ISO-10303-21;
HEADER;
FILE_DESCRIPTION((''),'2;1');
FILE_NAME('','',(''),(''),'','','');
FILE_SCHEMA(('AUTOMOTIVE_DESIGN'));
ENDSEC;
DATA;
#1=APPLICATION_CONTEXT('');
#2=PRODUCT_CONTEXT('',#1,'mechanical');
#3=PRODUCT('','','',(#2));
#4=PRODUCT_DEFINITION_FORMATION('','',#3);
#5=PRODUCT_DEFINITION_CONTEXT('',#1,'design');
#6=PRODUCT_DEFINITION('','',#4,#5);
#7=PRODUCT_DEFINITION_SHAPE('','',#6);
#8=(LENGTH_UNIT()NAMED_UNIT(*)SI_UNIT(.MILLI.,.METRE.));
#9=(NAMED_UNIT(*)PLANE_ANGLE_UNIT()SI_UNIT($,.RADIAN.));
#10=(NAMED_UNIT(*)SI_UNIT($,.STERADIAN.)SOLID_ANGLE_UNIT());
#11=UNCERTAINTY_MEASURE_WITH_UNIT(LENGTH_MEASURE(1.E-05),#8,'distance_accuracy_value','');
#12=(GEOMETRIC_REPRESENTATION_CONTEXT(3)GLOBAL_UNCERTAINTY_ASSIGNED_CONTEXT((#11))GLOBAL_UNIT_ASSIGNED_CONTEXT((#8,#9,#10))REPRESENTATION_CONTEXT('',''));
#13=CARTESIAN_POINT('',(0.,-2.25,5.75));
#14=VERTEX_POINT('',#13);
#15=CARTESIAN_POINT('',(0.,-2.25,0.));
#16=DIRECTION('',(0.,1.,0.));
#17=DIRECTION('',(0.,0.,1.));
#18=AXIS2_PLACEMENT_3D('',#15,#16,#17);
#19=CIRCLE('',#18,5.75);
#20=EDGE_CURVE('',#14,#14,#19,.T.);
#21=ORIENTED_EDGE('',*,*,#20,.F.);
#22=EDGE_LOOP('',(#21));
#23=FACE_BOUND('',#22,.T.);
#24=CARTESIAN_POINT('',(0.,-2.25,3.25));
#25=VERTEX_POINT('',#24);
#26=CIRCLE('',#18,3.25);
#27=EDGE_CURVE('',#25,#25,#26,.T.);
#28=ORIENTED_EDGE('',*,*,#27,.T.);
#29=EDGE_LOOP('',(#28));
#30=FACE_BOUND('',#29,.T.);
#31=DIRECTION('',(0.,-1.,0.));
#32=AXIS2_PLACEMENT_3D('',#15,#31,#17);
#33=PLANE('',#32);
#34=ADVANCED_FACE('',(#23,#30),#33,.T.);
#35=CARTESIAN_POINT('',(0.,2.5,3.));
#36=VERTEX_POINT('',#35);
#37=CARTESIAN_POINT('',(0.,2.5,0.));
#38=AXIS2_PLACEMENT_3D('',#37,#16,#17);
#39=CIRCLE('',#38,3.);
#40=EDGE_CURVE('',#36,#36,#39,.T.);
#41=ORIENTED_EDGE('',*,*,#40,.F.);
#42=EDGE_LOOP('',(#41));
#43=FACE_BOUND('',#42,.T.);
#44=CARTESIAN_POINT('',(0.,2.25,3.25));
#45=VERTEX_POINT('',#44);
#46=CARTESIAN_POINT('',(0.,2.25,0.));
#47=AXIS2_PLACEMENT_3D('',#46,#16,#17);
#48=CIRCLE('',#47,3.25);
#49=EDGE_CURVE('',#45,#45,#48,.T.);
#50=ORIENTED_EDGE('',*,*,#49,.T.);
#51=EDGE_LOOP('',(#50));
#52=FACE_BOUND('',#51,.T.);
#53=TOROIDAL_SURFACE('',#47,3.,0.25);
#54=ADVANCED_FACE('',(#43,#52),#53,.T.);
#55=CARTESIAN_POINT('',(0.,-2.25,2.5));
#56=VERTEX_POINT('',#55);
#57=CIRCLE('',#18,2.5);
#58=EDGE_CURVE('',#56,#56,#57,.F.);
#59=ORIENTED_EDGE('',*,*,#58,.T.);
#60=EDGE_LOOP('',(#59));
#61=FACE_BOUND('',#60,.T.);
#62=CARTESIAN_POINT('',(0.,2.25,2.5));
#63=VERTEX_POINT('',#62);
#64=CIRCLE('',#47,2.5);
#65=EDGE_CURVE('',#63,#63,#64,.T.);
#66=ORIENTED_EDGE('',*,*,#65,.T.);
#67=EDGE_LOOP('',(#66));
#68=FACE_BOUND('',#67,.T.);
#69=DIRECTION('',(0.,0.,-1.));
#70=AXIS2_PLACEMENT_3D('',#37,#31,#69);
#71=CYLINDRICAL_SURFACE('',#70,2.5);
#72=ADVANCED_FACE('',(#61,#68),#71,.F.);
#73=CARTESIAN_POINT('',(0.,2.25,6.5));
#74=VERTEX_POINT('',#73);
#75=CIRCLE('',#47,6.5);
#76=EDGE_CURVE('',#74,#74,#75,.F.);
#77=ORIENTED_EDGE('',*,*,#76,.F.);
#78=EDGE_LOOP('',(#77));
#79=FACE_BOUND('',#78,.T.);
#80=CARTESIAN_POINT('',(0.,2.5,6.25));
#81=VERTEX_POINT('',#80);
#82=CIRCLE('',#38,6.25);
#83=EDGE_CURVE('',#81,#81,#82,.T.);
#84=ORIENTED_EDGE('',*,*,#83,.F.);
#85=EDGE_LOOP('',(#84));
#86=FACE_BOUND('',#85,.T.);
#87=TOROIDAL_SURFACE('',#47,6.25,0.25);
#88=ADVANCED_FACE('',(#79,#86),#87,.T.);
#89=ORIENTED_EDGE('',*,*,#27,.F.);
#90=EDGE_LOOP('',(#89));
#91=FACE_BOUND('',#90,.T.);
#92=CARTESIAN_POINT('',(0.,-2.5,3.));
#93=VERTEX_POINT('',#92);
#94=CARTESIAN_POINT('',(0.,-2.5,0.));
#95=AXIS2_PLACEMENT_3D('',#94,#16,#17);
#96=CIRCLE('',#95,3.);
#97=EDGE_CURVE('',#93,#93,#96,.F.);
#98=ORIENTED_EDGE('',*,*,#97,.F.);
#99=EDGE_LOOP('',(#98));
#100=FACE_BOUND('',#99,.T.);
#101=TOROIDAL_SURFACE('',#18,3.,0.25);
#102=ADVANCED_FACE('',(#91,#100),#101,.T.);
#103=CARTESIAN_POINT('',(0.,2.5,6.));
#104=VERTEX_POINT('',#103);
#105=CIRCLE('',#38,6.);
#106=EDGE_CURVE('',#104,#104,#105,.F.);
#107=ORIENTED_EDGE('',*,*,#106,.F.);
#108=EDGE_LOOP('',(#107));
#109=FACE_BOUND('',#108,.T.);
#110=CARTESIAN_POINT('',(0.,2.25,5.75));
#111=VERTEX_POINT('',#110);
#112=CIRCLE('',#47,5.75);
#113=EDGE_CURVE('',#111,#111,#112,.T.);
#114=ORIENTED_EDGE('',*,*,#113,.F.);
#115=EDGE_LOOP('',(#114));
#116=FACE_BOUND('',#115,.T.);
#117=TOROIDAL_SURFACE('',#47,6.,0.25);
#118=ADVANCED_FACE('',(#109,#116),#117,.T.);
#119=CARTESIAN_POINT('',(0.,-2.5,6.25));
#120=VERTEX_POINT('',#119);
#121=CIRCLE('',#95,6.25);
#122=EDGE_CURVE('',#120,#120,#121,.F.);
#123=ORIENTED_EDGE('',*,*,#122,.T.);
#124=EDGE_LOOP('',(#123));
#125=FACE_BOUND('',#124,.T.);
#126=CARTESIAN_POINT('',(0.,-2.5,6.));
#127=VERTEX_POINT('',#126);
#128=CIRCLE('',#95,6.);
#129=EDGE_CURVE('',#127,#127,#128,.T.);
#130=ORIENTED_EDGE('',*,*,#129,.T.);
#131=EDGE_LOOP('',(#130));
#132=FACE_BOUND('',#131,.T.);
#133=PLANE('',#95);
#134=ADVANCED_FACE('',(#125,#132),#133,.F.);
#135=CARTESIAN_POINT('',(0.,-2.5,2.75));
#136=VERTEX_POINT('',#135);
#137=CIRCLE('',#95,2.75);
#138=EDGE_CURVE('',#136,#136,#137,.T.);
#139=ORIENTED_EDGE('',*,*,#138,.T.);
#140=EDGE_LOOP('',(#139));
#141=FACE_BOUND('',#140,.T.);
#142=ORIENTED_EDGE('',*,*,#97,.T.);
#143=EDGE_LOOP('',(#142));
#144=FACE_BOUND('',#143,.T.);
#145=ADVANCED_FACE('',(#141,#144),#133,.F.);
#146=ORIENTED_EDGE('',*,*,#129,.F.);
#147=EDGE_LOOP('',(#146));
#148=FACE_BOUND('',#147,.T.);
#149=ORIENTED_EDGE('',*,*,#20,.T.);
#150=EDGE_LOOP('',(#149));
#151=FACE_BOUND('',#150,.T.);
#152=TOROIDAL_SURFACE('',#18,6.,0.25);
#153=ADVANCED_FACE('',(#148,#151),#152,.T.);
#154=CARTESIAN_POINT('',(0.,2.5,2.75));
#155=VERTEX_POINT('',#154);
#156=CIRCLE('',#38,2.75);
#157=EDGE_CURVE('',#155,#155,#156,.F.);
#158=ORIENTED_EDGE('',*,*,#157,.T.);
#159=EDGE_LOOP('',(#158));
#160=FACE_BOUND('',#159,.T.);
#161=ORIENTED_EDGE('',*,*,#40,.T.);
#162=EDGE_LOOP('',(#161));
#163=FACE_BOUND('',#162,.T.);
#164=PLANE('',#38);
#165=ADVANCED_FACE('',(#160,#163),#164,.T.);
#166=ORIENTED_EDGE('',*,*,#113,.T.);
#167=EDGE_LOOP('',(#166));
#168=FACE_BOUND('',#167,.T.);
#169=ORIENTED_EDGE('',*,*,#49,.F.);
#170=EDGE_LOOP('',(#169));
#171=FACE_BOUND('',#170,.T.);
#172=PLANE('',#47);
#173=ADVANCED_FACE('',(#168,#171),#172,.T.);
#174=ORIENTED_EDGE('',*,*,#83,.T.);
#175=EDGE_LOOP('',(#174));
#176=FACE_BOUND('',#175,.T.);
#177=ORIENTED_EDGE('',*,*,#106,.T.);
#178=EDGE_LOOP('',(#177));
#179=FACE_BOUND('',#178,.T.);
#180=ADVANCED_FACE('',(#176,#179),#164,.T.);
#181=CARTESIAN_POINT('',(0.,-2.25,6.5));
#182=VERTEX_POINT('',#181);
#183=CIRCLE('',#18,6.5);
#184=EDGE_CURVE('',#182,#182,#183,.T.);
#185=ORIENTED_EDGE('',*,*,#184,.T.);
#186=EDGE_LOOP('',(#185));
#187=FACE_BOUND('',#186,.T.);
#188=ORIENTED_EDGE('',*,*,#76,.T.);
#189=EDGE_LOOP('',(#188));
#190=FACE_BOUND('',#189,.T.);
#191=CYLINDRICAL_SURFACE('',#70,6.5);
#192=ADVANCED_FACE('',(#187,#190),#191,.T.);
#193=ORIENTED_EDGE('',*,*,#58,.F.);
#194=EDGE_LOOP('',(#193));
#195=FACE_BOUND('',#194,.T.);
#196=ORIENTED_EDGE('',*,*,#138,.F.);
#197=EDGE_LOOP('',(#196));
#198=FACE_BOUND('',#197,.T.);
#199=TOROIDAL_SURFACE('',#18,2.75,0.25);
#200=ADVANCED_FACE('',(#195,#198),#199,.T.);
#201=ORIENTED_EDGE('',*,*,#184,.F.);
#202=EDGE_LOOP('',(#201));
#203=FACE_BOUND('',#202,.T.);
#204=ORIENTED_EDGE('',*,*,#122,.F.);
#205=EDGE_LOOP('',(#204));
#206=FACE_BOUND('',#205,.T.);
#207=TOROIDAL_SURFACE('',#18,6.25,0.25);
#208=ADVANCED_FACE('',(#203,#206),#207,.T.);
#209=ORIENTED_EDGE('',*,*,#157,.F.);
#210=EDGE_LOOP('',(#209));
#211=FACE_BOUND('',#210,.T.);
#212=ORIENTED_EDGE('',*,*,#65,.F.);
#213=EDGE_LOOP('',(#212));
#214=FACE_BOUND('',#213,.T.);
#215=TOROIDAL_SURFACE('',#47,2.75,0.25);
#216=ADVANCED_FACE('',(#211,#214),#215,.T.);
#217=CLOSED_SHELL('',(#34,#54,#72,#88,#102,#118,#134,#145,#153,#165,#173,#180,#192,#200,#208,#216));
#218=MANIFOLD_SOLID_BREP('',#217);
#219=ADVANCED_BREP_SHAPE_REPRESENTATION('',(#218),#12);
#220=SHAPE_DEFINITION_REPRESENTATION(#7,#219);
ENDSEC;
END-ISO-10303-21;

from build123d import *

# Parameters (mm, degrees)
SKETCH_1_R          = 6.5
SKETCH_1_R_2        = 2.5
EXTRUDE_1_DEPTH     = 2.5
SKETCH_2_R          = 5.75
SKETCH_2_R_2        = 3.25
CUT_EXTRUDE_1_DEPTH = 0.25
FILLET_1_R          = 0.25


with BuildPart() as part:
    # ｽｹｯﾁ1 → ﾎﾞｽ - 押し出し1 (new, symmetric)
    with BuildSketch(Plane(origin=(0, 0, 0), x_dir=(1, 0, 0), z_dir=(0, 1, 0))):
        with Locations(Location((0, 0, 0), (0, 0, 270))):
            Circle(SKETCH_1_R)
        with Locations(Location((0, 0, 0), (0, 0, 270))):
            Circle(SKETCH_1_R_2, mode=Mode.SUBTRACT)
    extrude(amount=EXTRUDE_1_DEPTH, both=True)

    # ｽｹｯﾁ2 → ｶｯﾄ - 押し出し1 (cut, symmetric)
    with BuildSketch(Plane(origin=(0, 2.5, 0), x_dir=(1, 0, 0), z_dir=(0, 1, 0))):
        Circle(SKETCH_2_R)
        Circle(SKETCH_2_R_2, mode=Mode.SUBTRACT)
    cut_extrude_1 = extrude(amount=CUT_EXTRUDE_1_DEPTH, both=True, mode=Mode.SUBTRACT)

    # ﾐﾗｰ1: ｶｯﾄ - 押し出し1 across plane
    add(cut_extrude_1.mirror(Plane.ZX), mode=Mode.SUBTRACT)

    # ﾌｨﾚｯﾄ1
    fillet_1_edges = [part.edges().sort_by_distance(p)[0] for p in [
        (0, -2.5, -6.5),
        (0, 2.5, -6.5),
        (-5.75, -2.5, 0),
        (-5.75, 2.5, 0),
        (-3.25, -2.5, 0),
        (-3.25, 2.5, 0),
        (0, -2.5, -2.5),
        (0, 2.5, -2.5),
    ]]
    fillet(fillet_1_edges, radius=FILLET_1_R - 0.0001)  # a hair under: the kernel refuses the full size


solid = part.part
